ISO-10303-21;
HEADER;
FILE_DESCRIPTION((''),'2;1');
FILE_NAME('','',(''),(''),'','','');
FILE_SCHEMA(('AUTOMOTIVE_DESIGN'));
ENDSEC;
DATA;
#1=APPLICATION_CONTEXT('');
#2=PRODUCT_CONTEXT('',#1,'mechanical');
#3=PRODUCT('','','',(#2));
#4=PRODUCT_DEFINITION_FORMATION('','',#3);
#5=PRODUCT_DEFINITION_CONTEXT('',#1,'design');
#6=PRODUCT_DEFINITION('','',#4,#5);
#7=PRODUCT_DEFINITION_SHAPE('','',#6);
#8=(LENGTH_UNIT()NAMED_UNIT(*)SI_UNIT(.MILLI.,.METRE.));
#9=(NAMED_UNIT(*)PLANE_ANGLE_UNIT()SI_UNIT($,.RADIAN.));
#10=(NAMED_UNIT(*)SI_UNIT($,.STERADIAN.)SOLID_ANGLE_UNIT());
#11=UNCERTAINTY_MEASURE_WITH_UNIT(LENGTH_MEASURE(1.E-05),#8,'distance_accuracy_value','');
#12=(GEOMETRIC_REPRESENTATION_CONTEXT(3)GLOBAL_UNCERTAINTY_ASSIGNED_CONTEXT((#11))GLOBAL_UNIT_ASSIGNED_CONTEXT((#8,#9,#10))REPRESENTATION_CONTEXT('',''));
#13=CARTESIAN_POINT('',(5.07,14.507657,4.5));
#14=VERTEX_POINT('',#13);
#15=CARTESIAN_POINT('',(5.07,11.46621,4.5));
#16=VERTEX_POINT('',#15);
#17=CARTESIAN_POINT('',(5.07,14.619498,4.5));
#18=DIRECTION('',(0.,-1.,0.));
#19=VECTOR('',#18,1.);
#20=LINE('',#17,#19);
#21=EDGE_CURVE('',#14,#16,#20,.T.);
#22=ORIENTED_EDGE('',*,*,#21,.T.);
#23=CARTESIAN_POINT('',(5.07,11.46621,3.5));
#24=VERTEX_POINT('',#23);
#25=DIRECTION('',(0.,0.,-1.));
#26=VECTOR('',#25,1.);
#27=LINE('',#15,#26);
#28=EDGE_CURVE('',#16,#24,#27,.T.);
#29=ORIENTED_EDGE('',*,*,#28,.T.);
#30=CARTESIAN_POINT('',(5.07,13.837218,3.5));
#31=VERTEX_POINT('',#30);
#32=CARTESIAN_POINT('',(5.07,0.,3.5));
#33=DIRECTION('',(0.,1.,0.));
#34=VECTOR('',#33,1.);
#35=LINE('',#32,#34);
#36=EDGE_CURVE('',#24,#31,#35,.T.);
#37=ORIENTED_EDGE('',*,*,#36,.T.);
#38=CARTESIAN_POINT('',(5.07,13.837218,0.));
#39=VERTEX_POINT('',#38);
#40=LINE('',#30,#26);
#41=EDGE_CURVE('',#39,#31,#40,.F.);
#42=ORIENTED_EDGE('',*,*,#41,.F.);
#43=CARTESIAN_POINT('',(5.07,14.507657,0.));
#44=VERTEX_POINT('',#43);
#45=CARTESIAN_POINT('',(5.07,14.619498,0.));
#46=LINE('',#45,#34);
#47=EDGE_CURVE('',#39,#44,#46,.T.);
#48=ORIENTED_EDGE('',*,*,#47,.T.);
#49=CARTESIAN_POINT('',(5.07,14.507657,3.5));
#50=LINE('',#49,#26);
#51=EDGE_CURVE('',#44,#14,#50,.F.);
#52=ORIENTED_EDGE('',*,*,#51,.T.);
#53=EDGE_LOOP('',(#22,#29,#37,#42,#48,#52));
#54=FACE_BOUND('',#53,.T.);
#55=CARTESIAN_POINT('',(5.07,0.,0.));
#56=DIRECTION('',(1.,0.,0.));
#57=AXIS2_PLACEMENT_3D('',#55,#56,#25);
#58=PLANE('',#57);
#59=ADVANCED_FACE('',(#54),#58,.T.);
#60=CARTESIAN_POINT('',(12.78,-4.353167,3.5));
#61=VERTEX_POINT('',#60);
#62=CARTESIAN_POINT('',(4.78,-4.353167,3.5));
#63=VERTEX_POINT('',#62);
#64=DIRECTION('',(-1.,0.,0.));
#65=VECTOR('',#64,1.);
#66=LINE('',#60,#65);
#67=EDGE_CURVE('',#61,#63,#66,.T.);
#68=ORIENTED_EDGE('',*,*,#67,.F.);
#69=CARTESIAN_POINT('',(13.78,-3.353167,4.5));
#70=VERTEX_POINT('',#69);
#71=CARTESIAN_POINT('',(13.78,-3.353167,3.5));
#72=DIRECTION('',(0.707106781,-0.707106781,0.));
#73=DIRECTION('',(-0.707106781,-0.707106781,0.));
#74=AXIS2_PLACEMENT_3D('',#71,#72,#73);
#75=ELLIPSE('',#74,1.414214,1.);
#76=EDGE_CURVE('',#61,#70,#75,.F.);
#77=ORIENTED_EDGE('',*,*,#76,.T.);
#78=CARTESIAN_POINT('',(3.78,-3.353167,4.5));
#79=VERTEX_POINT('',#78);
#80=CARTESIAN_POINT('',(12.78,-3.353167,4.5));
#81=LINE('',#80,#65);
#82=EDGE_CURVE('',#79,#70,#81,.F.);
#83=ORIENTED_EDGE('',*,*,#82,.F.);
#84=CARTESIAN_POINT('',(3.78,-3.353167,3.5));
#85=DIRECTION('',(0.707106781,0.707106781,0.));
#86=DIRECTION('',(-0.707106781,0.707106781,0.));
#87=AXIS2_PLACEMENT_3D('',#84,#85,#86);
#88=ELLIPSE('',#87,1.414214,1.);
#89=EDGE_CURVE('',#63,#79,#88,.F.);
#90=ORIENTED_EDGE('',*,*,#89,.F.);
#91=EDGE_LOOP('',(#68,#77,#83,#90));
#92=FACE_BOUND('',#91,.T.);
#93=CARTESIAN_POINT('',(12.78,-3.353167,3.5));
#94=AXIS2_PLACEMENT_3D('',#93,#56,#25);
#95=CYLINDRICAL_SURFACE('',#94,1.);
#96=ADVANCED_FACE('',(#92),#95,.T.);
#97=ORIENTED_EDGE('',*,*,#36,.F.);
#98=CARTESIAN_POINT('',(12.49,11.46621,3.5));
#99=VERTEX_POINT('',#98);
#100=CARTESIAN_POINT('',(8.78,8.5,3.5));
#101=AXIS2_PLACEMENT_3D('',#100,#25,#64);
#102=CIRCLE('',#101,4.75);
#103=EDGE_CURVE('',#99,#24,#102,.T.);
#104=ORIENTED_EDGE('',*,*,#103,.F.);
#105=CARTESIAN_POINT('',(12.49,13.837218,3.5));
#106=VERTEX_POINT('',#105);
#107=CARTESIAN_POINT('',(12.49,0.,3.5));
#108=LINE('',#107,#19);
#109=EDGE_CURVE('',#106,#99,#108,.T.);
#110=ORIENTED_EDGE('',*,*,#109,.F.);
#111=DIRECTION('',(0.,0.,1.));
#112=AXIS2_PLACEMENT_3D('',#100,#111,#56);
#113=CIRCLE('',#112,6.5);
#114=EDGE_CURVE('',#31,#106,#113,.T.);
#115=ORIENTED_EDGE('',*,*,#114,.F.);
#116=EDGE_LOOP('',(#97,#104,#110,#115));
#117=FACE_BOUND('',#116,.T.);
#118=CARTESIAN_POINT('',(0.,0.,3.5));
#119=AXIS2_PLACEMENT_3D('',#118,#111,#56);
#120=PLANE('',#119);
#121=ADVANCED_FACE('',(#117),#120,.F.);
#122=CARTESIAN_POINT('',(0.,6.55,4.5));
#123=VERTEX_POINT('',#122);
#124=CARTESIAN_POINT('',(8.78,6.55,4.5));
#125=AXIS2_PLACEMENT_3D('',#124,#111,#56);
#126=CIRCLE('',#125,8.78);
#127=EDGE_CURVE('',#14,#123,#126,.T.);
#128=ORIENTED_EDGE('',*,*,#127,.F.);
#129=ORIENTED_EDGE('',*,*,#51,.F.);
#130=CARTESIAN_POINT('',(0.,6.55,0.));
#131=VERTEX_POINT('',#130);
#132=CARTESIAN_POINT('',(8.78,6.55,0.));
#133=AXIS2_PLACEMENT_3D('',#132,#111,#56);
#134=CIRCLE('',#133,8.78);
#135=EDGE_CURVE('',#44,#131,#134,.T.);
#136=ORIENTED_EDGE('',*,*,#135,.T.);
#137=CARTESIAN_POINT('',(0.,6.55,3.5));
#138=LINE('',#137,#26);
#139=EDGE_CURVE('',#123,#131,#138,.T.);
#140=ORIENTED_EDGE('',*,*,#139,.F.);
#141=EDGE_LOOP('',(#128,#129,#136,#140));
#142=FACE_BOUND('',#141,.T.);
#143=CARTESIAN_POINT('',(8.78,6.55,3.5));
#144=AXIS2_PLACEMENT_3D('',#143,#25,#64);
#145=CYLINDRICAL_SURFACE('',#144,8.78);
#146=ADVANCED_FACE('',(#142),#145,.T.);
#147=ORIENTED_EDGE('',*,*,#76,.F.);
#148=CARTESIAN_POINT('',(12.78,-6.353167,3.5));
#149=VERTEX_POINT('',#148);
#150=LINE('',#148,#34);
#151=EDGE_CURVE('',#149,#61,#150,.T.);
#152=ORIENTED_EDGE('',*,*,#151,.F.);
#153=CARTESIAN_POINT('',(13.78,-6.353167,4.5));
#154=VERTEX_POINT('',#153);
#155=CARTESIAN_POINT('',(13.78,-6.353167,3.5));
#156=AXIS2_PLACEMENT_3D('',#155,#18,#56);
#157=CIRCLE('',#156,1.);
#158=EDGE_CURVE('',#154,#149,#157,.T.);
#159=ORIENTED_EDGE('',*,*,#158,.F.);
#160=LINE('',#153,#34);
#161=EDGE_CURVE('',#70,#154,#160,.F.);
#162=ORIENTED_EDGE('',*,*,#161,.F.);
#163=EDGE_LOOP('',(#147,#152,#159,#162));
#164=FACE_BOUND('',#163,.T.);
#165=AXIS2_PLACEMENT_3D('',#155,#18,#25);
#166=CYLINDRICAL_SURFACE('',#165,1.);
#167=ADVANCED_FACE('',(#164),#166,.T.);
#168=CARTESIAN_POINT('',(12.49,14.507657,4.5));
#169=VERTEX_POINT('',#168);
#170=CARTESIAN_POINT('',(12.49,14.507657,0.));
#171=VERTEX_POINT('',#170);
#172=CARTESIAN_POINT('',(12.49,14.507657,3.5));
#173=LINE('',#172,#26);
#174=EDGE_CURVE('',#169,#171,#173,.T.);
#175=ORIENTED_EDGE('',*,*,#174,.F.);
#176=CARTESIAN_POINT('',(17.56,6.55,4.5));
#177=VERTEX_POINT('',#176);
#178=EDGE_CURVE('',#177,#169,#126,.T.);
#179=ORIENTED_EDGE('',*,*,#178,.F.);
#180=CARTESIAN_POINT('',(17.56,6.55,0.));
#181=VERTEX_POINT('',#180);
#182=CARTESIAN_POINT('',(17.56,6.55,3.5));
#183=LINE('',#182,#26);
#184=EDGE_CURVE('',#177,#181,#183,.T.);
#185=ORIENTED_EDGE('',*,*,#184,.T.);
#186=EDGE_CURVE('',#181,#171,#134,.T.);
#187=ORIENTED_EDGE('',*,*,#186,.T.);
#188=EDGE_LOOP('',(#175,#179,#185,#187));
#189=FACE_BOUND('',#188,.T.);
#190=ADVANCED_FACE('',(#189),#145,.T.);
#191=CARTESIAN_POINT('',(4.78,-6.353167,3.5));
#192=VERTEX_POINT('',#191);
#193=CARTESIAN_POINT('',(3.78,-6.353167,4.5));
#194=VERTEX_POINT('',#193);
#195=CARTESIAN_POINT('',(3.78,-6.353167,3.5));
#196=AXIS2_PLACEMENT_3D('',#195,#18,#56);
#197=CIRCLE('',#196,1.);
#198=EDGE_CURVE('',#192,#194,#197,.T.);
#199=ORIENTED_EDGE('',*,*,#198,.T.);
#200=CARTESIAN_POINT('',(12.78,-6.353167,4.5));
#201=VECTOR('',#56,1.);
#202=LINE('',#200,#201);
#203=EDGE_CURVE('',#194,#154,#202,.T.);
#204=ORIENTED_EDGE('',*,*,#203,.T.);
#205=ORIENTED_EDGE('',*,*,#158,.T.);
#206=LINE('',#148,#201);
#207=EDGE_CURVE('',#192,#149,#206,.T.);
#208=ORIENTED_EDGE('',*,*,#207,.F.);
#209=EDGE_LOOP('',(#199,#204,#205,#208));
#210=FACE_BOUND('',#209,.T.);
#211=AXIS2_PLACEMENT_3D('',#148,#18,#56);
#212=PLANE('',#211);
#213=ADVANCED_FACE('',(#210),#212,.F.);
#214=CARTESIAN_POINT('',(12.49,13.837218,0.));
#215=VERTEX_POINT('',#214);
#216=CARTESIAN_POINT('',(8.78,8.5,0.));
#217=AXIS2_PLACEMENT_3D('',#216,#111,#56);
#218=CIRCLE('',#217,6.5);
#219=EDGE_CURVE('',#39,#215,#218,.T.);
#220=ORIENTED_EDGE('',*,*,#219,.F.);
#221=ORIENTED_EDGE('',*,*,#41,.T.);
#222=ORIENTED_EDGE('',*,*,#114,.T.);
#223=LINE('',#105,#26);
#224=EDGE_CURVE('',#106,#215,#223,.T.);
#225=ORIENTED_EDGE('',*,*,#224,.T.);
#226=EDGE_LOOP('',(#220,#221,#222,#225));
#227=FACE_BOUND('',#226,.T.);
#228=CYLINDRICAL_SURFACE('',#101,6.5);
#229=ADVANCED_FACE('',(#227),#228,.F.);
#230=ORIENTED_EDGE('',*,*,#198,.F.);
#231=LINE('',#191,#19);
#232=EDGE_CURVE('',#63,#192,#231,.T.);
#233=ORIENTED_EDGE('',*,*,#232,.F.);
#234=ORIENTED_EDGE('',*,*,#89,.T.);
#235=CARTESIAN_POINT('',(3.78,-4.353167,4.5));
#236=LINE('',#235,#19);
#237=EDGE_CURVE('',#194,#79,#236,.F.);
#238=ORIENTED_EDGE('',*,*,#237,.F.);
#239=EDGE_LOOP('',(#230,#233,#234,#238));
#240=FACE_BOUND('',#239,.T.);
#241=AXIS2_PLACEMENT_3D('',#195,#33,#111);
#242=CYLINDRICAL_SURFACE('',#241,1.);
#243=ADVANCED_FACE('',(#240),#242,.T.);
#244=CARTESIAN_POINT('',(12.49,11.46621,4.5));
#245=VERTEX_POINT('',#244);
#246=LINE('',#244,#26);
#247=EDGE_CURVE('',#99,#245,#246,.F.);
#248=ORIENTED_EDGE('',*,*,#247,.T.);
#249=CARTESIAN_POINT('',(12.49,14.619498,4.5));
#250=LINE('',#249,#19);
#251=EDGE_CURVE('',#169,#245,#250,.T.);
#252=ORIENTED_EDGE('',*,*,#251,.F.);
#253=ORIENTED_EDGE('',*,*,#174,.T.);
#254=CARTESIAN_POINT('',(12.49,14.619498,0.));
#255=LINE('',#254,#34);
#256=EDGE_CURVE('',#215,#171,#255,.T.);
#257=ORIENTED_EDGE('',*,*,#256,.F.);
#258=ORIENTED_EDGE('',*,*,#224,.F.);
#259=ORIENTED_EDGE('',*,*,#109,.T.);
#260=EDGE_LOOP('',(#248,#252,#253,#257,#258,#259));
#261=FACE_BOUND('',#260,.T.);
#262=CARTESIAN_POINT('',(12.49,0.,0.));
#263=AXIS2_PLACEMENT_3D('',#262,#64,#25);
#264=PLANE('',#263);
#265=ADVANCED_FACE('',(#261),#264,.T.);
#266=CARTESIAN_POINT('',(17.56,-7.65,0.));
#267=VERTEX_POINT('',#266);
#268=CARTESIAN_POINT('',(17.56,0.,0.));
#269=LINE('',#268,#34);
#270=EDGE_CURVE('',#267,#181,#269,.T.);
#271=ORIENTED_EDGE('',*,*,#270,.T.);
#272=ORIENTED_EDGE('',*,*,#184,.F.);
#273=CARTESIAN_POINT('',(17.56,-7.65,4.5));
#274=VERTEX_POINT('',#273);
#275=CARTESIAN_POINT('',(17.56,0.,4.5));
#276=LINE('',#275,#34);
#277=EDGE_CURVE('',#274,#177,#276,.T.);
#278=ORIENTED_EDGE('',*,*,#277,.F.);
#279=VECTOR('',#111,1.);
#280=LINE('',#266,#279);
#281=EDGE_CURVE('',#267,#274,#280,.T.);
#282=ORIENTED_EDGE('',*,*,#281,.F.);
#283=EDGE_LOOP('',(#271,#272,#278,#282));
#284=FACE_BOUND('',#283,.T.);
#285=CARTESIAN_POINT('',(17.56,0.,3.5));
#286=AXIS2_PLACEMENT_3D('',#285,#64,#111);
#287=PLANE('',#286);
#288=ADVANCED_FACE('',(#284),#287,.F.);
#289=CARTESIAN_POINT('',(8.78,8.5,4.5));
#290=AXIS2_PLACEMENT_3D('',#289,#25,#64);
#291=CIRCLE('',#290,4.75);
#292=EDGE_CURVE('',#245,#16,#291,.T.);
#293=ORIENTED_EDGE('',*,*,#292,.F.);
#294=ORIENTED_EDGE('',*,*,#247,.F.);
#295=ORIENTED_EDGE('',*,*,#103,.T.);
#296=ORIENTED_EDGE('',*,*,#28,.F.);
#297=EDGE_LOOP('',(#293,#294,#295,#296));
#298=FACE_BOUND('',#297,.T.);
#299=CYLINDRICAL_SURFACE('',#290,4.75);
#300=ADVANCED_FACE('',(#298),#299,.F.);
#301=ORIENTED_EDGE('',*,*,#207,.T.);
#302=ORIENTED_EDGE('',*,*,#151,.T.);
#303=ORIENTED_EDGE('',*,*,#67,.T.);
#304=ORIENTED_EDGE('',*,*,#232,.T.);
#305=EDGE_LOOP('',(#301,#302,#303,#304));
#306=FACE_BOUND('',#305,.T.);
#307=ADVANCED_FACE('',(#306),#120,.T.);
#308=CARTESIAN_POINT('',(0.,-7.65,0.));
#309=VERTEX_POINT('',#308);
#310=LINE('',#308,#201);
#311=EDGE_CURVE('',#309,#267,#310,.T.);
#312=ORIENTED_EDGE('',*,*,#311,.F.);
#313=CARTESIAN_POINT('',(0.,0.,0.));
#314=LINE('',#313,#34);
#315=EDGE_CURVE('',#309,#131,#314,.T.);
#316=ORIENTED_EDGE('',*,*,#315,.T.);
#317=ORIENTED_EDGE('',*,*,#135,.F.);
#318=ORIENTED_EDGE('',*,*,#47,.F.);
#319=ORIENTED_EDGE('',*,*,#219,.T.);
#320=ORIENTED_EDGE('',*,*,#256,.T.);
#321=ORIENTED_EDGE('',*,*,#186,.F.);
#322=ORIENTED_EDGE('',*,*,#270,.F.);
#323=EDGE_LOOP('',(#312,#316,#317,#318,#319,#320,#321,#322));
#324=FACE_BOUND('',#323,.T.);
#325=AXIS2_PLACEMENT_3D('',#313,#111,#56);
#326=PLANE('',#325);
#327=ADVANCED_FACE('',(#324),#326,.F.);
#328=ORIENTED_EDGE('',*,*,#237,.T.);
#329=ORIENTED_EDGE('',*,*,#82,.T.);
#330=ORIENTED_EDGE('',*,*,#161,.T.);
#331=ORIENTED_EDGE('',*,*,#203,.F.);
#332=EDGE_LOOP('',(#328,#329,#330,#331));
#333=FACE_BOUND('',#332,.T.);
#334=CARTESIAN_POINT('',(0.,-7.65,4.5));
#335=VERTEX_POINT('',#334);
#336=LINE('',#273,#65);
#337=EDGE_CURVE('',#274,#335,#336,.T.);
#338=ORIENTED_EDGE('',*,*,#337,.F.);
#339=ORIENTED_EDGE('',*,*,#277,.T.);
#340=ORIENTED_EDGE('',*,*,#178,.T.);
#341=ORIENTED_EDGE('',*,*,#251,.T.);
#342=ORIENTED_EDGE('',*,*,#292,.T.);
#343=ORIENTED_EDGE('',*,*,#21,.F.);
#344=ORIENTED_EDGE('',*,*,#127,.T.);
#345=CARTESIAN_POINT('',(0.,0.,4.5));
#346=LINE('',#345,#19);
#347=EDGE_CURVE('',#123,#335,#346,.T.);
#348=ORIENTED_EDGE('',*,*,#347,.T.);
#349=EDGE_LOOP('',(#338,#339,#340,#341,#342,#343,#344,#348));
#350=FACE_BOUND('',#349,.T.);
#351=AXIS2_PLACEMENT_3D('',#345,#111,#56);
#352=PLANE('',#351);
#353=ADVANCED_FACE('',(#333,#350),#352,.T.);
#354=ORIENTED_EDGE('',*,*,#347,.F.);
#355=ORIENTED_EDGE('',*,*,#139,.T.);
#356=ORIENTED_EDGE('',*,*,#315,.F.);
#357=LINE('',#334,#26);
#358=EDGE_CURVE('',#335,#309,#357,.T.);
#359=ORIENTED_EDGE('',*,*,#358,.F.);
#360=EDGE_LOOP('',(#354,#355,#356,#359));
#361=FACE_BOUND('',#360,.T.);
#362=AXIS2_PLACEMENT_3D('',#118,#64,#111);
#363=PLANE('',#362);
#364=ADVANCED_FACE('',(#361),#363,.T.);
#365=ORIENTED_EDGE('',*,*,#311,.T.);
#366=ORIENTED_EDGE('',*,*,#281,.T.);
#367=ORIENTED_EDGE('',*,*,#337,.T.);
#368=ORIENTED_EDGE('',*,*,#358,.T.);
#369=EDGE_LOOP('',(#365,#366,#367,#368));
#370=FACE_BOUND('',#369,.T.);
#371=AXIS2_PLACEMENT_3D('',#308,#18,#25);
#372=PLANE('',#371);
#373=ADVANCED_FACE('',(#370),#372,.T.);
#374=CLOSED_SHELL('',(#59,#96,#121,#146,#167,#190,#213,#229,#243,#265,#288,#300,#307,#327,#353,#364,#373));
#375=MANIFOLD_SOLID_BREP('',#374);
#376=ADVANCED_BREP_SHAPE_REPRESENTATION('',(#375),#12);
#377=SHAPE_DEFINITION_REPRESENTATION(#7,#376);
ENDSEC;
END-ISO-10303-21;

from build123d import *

# Parameters (mm, degrees)
BOSS_EXTRUDE1_DEPTH = 3.5
BOSS_EXTRUDE2_DEPTH = 1
SKETCH4_R           = 4.75
CUT_EXTRUDE1_DEPTH  = 24.115651093
SKETCH5_W           = 17.56
SKETCH5_H           = 4.5
BOSS_EXTRUDE3_DEPTH = 0.15
SKETCH6_W           = 17.56
SKETCH6_H           = 4.5
BOSS_EXTRUDE4_DEPTH = 7.5
SKETCH9_W           = 8
SKETCH9_H           = 2
CUT_EXTRUDE2_DEPTH  = 1
FILLET1_R           = 1
CUT_EXTRUDE3_REACH  = 30.715
SKETCH10_W          = 6.92
SKETCH10_H          = 1
SKETCH11_W          = 4.5
SKETCH11_H          = 3.588872583
CUT_EXTRUDE4_DEPTH  = 0.25


with BuildPart() as part:
    # Sketch1 → Boss-Extrude1 (new body)
    with BuildSketch(Plane.XY):
        with BuildLine():
            ThreePointArc((14.980604809, 6.55), (8.78, 2), (2.579395191, 6.55))
            Line((2.579395191, 6.55), (0, 6.55))
            Line((0, 6.55), (0, 0))
            Line((0, 0), (17.56, 0))
            Line((17.56, 0), (17.56, 6.55))
            Line((17.56, 6.55), (14.980604809, 6.55))
        make_face()
        with BuildLine():
            ThreePointArc((2.579395191, 6.55), (2.679421093, 10.743420825), (5.32, 14.002581212))
            Line((5.32, 14.002581212), (5.32, 14.619498126))
            ThreePointArc((5.32, 14.619498126), (1.449679407, 11.382680416), (0, 6.55))
            Line((0, 6.55), (2.579395191, 6.55))
        make_face()
        with BuildLine():
            ThreePointArc((12.24, 14.002581212), (14.880578907, 10.743420825), (14.980604809, 6.55))
            Line((14.980604809, 6.55), (17.56, 6.55))
            ThreePointArc((17.56, 6.55), (16.110320593, 11.382680416), (12.24, 14.619498126))
            Line((12.24, 14.619498126), (12.24, 14.002581212))
        make_face()
    extrude(amount=BOSS_EXTRUDE1_DEPTH)

    # Sketch3 → Boss-Extrude2 (add)
    with BuildSketch(Plane.XY.offset(3.5)):
        with BuildLine():
            Line((12.24, 14.619498126), (12.24, 14.002581212))
            ThreePointArc((12.24, 14.002581212), (8.78, 2), (5.32, 14.002581212))
            Line((5.32, 14.002581212), (5.32, 14.619498126))
            ThreePointArc((5.32, 14.619498126), (1.449679407, 11.382680416), (0, 6.55))
            Line((0, 6.55), (0, 0))
            Line((0, 0), (17.56, 0))
            Line((17.56, 0), (17.56, 6.55))
            ThreePointArc((17.56, 6.55), (16.110320593, 11.382680416), (12.24, 14.619498126))
        make_face()
        with BuildLine():
            Line((5.32, 14.619498126), (12.24, 14.619498126))
            Line((12.24, 14.619498126), (12.24, 14.002581212))
            ThreePointArc((12.24, 14.002581212), (8.78, 2), (5.32, 14.002581212))
            Line((5.32, 14.002581212), (5.32, 14.619498126))
        make_face()
    extrude(amount=BOSS_EXTRUDE2_DEPTH)

    # Sketch4 → Cut-Extrude1 (cut, through all)
    with BuildSketch(Plane(origin=(0, 0, 3.5), x_dir=(-1, 0, 0), z_dir=(0, 0, -1))):
        with Locations((-8.78, 8.5)):
            Circle(SKETCH4_R)
    extrude(amount=-CUT_EXTRUDE1_DEPTH, mode=Mode.SUBTRACT)

    # Sketch5 → Boss-Extrude3 (add)
    with BuildSketch(Plane.XZ):
        with Locations((8.78, 2.25)):
            Rectangle(SKETCH5_W, SKETCH5_H)
    extrude(amount=BOSS_EXTRUDE3_DEPTH)

    # Sketch6 → Boss-Extrude4 (add)
    with BuildSketch(Plane.XZ.offset(0.15)):
        with Locations((8.78, 2.25)):
            Rectangle(SKETCH6_W, SKETCH6_H)
    extrude(amount=BOSS_EXTRUDE4_DEPTH)

    # Sketch9 → Cut-Extrude2 (cut)
    with BuildSketch(Plane.XY.offset(4.5)):
        with Locations((8.78, -5.353166831)):
            Rectangle(SKETCH9_W, SKETCH9_H)
    extrude(amount=-CUT_EXTRUDE2_DEPTH, mode=Mode.SUBTRACT)

    # Fillet1
    fillet1_edges = [part.edges().sort_by_distance(p)[0] for p in [
        (4.78, -5.353166831, 4.5),
        (12.78, -5.353166831, 4.5),
        (8.78, -4.353166831, 4.5),
    ]]
    fillet(fillet1_edges, radius=FILLET1_R - 0.0001)  # a hair under: the kernel refuses the full size

    # Sketch10 → Cut-Extrude3 (cut, up to next)
    with BuildSketch(Plane(origin=(0, 14.619498126, 0), x_dir=(1, 0, 0), z_dir=(0, 1, 0)), mode=Mode.PRIVATE) as cut_extrude3_sk1:
        with Locations((8.78, -4)):
            Rectangle(SKETCH10_W, SKETCH10_H)
    cut_extrude3_tool1 = extrude(cut_extrude3_sk1.sketch, amount=-CUT_EXTRUDE3_REACH, mode=Mode.PRIVATE) & part.part
    add(cut_extrude3_tool1.solids().sort_by_distance((8.78, 14.619498, 4))[0], mode=Mode.SUBTRACT)

    # Sketch11 → Cut-Extrude4 (cut)
    with BuildSketch(Plane(origin=(5.32, 0, 0), x_dir=(0, 0, -1), z_dir=(1, 0, 0))):
        with Locations((-2.25, 12.825061835)):
            Rectangle(SKETCH11_W, SKETCH11_H)
    cut_extrude4 = extrude(amount=-CUT_EXTRUDE4_DEPTH, mode=Mode.SUBTRACT)

    # Mirror1: Cut-Extrude4 across plane
    add(cut_extrude4.mirror(Plane.ZY.offset(-8.78)), mode=Mode.SUBTRACT)


solid = part.part
